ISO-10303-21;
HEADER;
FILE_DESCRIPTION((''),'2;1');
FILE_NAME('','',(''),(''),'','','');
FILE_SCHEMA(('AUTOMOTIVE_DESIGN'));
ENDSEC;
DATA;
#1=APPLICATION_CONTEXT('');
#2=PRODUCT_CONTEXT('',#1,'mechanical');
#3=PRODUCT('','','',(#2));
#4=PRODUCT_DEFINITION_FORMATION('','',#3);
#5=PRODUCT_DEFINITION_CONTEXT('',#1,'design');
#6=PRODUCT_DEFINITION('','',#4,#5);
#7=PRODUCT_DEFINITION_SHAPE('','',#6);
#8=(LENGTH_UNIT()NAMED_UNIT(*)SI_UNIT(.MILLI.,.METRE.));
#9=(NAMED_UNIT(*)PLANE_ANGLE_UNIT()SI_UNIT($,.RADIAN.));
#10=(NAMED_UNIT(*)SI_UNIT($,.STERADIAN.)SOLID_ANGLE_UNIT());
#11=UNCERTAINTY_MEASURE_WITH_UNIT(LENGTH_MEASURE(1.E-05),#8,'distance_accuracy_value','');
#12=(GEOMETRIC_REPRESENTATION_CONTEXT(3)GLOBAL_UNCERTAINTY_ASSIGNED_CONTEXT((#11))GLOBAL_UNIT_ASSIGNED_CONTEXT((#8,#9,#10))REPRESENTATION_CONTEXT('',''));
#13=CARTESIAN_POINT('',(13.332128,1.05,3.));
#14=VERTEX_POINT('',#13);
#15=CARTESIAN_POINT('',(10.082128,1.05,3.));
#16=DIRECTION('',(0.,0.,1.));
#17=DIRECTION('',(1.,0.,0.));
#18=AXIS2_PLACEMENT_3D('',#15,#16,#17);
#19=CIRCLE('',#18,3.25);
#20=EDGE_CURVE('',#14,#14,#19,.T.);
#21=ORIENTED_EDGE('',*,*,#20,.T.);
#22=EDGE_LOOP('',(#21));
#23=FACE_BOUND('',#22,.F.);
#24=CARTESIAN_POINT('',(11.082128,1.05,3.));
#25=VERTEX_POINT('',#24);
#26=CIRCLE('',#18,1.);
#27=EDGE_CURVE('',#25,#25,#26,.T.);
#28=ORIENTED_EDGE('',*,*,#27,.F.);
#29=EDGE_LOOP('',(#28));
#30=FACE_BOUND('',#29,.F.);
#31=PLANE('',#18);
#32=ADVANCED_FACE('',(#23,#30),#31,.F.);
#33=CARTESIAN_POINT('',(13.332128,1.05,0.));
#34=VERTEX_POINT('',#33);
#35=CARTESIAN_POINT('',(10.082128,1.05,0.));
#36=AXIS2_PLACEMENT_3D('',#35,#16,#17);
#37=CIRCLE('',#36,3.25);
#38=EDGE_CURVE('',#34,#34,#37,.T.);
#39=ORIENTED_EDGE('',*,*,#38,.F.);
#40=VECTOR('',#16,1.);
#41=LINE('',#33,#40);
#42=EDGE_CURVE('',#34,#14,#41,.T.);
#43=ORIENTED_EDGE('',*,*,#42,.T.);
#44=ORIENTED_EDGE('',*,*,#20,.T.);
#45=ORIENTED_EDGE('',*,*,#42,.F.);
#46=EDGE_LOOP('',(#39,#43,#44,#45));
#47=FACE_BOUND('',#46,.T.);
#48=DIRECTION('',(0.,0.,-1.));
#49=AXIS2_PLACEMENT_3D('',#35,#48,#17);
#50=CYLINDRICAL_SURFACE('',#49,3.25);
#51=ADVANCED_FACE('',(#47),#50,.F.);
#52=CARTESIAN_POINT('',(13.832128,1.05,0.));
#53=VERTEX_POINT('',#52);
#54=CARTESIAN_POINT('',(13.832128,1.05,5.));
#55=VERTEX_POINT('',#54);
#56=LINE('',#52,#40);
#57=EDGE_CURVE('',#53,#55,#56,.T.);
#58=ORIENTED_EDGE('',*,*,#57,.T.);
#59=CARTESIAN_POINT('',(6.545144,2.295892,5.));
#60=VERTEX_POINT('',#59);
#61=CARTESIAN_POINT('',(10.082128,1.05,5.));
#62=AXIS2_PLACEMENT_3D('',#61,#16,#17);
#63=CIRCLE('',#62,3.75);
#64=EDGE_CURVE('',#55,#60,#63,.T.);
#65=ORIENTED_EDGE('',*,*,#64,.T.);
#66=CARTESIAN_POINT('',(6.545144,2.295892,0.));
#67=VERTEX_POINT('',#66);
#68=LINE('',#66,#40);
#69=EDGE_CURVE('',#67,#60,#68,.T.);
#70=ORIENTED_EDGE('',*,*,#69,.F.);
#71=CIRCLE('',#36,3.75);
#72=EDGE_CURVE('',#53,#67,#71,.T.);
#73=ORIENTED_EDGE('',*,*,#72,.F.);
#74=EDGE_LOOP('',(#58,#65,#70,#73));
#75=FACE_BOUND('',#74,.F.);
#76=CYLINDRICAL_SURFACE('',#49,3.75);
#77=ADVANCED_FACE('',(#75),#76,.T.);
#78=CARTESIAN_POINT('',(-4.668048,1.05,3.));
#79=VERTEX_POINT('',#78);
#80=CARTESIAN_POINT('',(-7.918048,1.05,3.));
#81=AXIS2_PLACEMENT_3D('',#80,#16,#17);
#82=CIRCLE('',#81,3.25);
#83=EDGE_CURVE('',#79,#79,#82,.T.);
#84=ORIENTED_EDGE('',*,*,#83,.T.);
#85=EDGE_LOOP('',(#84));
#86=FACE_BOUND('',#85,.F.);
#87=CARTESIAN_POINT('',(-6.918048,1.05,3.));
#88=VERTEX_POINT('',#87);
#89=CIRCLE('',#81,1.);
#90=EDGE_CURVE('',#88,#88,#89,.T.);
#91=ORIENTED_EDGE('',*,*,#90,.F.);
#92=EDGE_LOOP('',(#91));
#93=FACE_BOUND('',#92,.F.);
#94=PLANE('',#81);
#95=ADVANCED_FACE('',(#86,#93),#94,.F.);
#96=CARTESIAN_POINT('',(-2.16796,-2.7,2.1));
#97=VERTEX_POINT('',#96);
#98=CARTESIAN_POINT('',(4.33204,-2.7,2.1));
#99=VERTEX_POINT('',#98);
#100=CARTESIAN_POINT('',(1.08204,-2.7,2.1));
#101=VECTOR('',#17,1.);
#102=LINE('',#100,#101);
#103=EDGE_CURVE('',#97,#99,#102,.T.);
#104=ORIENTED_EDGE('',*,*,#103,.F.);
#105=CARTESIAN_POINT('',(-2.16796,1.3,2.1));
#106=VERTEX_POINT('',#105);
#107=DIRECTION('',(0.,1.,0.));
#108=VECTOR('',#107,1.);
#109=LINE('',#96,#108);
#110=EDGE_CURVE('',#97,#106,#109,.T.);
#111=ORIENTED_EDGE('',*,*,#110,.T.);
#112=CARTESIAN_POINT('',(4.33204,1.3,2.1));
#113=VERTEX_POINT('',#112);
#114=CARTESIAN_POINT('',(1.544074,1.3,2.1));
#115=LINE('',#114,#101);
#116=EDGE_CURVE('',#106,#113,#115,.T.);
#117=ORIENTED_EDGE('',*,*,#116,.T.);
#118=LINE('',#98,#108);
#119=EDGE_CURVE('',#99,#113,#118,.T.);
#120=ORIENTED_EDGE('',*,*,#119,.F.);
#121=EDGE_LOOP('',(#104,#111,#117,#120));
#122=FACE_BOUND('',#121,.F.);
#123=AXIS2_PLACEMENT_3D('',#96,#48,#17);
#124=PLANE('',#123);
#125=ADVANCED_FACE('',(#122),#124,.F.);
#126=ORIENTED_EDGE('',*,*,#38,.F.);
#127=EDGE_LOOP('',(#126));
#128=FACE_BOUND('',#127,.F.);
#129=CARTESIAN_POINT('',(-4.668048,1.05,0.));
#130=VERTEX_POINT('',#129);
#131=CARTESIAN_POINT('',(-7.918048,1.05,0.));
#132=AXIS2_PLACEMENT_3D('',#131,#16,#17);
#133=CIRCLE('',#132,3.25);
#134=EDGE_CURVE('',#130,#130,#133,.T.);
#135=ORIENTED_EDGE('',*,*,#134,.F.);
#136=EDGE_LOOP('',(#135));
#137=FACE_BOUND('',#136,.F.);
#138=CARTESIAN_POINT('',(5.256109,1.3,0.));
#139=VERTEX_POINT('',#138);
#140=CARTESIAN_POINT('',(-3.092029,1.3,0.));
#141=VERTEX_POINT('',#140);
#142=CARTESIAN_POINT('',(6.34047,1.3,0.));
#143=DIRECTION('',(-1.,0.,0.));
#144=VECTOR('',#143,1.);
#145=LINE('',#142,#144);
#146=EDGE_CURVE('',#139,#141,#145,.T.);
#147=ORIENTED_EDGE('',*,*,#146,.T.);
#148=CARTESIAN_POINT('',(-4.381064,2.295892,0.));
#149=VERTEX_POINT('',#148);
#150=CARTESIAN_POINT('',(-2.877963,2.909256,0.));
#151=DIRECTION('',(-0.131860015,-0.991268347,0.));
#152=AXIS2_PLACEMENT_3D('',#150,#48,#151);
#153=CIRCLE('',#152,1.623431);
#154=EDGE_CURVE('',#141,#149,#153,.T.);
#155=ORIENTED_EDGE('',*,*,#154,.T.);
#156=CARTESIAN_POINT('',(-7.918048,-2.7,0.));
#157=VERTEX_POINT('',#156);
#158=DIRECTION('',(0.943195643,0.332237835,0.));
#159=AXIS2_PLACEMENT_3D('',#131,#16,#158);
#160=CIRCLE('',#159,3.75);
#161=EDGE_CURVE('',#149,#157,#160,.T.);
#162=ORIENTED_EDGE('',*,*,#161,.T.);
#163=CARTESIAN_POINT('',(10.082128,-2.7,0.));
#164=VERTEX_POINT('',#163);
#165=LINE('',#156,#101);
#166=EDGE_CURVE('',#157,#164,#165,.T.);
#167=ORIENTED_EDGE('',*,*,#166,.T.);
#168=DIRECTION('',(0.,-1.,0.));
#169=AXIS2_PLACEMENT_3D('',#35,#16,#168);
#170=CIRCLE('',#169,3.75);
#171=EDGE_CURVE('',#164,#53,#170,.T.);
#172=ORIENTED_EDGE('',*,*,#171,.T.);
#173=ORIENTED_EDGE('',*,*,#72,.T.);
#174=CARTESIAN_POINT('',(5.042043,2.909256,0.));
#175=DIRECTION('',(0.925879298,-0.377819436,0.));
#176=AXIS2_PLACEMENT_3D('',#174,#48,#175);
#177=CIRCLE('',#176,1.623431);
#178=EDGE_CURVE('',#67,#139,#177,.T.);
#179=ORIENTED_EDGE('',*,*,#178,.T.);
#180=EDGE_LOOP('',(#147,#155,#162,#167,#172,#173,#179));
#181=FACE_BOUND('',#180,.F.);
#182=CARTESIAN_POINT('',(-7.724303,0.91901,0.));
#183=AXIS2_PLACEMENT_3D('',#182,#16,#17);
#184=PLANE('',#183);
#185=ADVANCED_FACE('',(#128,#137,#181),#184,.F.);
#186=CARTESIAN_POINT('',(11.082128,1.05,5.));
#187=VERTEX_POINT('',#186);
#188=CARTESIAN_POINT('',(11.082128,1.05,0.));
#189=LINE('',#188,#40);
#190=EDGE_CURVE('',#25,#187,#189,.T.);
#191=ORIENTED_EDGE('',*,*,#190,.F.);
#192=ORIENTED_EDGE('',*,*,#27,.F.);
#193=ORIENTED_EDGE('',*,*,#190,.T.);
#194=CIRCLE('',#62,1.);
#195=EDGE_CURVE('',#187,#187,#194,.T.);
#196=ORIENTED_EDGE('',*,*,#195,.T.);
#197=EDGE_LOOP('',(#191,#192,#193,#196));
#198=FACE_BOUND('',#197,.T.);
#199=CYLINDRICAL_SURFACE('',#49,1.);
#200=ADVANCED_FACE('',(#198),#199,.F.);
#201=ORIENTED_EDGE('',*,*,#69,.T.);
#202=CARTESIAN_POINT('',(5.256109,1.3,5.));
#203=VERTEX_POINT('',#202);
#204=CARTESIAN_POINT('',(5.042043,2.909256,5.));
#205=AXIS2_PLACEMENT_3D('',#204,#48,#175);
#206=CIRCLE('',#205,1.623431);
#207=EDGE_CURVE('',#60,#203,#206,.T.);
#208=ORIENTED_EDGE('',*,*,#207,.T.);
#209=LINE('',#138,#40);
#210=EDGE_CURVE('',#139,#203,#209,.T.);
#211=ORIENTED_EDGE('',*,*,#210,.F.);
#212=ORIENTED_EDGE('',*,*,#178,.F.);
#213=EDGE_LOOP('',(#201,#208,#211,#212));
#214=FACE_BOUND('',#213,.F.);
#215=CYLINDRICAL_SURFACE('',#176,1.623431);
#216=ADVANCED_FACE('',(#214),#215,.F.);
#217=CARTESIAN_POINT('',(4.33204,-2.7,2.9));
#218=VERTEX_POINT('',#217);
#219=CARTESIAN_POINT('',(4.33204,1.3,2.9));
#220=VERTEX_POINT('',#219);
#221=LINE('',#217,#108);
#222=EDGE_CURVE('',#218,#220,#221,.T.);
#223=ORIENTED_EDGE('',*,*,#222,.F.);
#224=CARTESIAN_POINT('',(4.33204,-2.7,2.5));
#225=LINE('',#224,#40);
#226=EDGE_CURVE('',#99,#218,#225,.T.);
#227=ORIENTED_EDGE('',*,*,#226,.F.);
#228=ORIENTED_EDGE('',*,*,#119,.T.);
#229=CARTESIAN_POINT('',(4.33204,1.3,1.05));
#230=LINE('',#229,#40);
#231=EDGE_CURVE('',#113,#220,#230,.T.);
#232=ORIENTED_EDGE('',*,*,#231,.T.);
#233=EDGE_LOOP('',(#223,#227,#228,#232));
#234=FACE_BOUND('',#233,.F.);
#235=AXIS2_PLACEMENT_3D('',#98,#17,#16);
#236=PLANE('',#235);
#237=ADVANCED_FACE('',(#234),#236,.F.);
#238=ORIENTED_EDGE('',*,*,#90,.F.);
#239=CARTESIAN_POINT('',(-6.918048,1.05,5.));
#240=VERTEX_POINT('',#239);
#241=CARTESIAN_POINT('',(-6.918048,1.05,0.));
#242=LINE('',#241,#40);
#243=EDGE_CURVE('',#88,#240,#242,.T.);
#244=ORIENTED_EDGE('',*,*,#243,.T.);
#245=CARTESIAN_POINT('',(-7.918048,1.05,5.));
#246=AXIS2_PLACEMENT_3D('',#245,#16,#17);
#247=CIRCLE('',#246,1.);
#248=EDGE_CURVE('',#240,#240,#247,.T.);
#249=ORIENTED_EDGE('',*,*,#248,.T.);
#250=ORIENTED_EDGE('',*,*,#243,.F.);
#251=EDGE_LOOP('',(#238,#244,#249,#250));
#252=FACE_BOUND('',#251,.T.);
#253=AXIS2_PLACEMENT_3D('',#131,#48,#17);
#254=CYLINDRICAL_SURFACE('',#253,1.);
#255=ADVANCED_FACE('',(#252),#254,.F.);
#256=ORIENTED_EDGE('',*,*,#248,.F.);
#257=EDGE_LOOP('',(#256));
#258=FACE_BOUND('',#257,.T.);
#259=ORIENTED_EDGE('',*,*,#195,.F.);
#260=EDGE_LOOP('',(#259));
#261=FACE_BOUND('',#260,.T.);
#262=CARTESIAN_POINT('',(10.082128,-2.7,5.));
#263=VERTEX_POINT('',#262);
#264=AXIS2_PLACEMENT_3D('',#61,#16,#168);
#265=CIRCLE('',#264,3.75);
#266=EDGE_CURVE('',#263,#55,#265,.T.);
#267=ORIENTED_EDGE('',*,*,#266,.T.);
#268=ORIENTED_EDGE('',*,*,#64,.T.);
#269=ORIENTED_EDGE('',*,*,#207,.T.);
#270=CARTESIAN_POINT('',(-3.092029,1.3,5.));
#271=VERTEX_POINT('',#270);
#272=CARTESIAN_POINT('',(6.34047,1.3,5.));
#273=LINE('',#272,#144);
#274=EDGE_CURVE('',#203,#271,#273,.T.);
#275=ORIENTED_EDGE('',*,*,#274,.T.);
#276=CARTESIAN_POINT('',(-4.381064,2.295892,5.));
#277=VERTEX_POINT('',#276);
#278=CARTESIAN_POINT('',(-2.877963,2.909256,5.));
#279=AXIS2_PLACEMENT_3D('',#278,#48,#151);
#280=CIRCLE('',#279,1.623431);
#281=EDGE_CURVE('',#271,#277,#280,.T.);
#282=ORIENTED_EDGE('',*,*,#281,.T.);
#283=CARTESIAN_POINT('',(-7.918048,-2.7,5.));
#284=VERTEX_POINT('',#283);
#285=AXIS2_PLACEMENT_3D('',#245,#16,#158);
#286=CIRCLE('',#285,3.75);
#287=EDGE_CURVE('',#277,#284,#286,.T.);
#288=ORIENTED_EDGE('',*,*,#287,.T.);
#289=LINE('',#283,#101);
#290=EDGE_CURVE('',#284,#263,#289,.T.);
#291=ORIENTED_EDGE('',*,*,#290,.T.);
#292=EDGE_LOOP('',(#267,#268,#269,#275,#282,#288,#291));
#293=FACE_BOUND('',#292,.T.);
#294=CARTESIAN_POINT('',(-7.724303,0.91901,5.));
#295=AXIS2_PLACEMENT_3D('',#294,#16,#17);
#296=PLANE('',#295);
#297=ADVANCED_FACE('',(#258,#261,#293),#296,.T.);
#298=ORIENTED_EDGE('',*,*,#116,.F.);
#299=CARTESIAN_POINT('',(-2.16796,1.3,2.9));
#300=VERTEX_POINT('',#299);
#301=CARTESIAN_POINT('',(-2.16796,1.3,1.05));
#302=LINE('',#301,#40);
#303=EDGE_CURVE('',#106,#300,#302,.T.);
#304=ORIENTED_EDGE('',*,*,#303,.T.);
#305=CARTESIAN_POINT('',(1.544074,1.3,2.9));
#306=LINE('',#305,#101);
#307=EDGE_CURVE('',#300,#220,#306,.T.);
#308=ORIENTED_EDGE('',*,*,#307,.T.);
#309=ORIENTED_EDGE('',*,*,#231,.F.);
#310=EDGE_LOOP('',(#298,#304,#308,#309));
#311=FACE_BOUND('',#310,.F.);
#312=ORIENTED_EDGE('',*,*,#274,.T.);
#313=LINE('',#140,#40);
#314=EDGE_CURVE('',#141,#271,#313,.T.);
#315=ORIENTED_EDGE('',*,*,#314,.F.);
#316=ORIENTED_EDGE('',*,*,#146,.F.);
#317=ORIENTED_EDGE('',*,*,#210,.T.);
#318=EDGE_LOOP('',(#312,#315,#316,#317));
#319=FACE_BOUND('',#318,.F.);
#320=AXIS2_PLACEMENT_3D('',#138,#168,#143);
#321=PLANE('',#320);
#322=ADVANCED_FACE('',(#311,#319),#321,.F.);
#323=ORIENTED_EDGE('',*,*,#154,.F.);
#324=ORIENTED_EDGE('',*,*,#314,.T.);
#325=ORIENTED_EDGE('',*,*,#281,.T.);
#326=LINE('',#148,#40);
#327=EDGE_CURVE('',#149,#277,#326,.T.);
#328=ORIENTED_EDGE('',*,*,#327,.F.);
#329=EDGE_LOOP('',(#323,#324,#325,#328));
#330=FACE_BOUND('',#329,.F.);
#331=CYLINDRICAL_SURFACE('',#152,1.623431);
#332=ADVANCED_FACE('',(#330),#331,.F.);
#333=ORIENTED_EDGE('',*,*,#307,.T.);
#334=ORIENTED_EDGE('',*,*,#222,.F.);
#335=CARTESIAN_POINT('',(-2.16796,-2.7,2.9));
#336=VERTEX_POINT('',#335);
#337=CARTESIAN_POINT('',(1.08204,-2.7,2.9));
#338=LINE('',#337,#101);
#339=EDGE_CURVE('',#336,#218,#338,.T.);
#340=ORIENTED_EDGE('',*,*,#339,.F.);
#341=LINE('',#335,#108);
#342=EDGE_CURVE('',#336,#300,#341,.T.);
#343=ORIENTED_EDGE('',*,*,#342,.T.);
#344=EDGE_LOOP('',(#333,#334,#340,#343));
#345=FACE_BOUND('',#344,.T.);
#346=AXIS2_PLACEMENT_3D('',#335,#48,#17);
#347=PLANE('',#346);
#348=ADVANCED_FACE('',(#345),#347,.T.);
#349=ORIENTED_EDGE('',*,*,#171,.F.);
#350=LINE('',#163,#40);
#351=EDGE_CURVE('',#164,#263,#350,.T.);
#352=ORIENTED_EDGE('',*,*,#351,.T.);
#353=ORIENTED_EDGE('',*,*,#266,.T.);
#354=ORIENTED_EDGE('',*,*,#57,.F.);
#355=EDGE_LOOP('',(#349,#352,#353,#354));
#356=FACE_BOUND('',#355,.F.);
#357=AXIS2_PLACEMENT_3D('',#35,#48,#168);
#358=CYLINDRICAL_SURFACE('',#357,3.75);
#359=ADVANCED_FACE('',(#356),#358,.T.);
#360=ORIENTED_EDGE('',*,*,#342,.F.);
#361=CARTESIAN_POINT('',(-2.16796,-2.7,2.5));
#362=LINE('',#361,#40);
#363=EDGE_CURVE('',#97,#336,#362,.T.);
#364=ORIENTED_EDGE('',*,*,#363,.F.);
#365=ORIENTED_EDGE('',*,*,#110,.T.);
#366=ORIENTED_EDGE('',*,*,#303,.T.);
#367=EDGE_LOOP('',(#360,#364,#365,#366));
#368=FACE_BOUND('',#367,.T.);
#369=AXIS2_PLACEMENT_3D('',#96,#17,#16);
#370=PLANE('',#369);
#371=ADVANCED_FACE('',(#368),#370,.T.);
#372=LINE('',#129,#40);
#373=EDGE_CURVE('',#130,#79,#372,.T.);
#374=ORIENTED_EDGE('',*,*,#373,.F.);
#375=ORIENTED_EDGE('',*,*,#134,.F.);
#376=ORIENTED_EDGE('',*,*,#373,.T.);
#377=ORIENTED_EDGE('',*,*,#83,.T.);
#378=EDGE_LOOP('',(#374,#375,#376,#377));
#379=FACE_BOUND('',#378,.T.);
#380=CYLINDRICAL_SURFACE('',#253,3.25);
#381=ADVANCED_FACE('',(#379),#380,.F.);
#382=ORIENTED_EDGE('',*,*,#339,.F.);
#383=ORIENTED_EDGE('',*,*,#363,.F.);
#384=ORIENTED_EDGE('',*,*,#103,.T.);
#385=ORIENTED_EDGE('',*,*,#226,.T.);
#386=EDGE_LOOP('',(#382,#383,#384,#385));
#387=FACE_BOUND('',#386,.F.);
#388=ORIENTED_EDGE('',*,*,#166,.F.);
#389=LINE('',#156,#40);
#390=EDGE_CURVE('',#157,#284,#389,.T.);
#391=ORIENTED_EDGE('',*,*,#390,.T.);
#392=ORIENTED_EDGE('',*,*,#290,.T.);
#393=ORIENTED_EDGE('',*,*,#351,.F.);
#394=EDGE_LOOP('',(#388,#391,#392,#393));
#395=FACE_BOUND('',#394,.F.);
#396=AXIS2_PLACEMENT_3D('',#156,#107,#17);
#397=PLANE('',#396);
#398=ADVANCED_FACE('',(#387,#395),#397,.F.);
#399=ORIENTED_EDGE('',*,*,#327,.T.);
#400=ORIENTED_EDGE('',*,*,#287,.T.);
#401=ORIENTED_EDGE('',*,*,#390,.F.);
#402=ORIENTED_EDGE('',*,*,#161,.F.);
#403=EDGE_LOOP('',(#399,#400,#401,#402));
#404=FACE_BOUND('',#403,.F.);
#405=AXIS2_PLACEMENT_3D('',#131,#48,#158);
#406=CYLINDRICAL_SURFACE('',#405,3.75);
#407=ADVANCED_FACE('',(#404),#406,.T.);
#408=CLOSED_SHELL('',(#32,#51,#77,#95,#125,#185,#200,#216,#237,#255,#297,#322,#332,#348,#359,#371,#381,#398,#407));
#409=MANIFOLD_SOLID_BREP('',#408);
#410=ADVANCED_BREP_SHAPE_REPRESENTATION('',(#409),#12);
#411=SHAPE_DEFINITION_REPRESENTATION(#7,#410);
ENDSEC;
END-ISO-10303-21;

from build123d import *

# Parameters (mm, degrees)
F0_R     = 3.25
F0_R_2   = 1
F1_DEPTH = 5
F2_DEPTH = 3
F3_W     = 6.5
F3_H     = 0.8
F4_DEPTH = 25


with BuildPart() as f1:
    # F0 (on Top) → F1 (new body)
    with BuildSketch(Plane.XY):
        with BuildLine():
            ThreePointArc((-7.9180477187, -2.6999995224), (-5.2663972893, -1.6016499519), (-4.1680477187, 1.0500004776))
            ThreePointArc((-4.1680477187, 1.0500004776), (-4.1701339523, 1.1750700574), (-4.1763903319, 1.3000004776))
            ThreePointArc((-4.1763903319, 1.3000004776), (-4.2448197056, 1.8049150184), (-4.3810640575, 2.2958923592))
            ThreePointArc((-4.3810640575, 2.2958923592), (-10.9786517895, 3.2168421243), (-7.9180477187, -2.6999995224))
        make_face()
        with Locations((-7.9180477187, 1.0500004776)):
            Circle(F0_R, mode=Mode.SUBTRACT)
        with Locations((-7.9180477187, 1.0500004776)):
            Circle(F0_R)
        with Locations((-7.9180477187, 1.0500004776)):
            Circle(F0_R_2, mode=Mode.SUBTRACT)
        with BuildLine():
            ThreePointArc((6.3404704502, 1.3000004776), (7.3435150495, -1.5117372139), (10.082127837, -2.6999995224))
            ThreePointArc((10.082127837, -2.6999995224), (12.7337782665, -1.6016499519), (13.832127837, 1.0500004776))
            ThreePointArc((13.832127837, 1.0500004776), (10.7141133078, 4.7463627927), (6.5451441758, 2.2958923592))
            ThreePointArc((6.5451441758, 2.2958923592), (6.4088998239, 1.8049150184), (6.3404704502, 1.3000004776))
        make_face()
        with Locations((10.082127837, 1.0500004776)):
            Circle(F0_R, mode=Mode.SUBTRACT)
        with Locations((10.082127837, 1.0500004776)):
            Circle(F0_R)
        with Locations((10.082127837, 1.0500004776)):
            Circle(F0_R_2, mode=Mode.SUBTRACT)
        with BuildLine():
            ThreePointArc((-4.1763903319, 1.3000004776), (-4.1701339523, 1.1750700574), (-4.1680477187, 1.0500004776))
            ThreePointArc((-4.1680477187, 1.0500004776), (-5.2663972893, -1.6016499519), (-7.9180477187, -2.6999995224))
            Line((-7.9180477187, -2.6999995224), (10.082127837, -2.6999995224))
            ThreePointArc((10.082127837, -2.6999995224), (7.3435150495, -1.5117372139), (6.3404704502, 1.3000004776))
            Line((6.3404704502, 1.3000004776), (5.2561087846, 1.3000004776))
            Line((5.2561087846, 1.3000004776), (-3.0920286663, 1.3000004776))
            Line((-3.0920286663, 1.3000004776), (-4.1763903319, 1.3000004776))
        make_face()
        with BuildLine():
            ThreePointArc((-4.3810640575, 2.2958923592), (-4.2448197056, 1.8049150184), (-4.1763903319, 1.3000004776))
            Line((-4.1763903319, 1.3000004776), (-3.0920286663, 1.3000004776))
            ThreePointArc((-3.0920286663, 1.3000004776), (-3.8704928802, 1.6245723747), (-4.3810640575, 2.2958923592))
        make_face()
        with BuildLine():
            ThreePointArc((6.5451441758, 2.2958923592), (6.0345729985, 1.6245723747), (5.2561087846, 1.3000004776))
            Line((5.2561087846, 1.3000004776), (6.3404704502, 1.3000004776))
            ThreePointArc((6.3404704502, 1.3000004776), (6.4088998239, 1.8049150184), (6.5451441758, 2.2958923592))
        make_face()
    extrude(amount=F1_DEPTH)

    # F0 (on Top) → F2 (cut)
    with BuildSketch(Plane.XY):
        with Locations((10.082127837, 1.0500004776)):
            Circle(F0_R)
        with Locations((10.082127837, 1.0500004776)):
            Circle(F0_R_2, mode=Mode.SUBTRACT)
        with Locations((-7.9180477187, 1.0500004776)):
            Circle(F0_R)
        with Locations((-7.9180477187, 1.0500004776)):
            Circle(F0_R_2, mode=Mode.SUBTRACT)
    extrude(amount=F2_DEPTH, mode=Mode.SUBTRACT)

    # F3 (on face) → F4 (cut)
    with BuildSketch(Plane.XZ.offset(2.6999995224)):
        with Locations((1.0820400592, 2.5)):
            Rectangle(F3_W, F3_H)
    extrude(amount=-F4_DEPTH, mode=Mode.SUBTRACT)


solid = f1.part
